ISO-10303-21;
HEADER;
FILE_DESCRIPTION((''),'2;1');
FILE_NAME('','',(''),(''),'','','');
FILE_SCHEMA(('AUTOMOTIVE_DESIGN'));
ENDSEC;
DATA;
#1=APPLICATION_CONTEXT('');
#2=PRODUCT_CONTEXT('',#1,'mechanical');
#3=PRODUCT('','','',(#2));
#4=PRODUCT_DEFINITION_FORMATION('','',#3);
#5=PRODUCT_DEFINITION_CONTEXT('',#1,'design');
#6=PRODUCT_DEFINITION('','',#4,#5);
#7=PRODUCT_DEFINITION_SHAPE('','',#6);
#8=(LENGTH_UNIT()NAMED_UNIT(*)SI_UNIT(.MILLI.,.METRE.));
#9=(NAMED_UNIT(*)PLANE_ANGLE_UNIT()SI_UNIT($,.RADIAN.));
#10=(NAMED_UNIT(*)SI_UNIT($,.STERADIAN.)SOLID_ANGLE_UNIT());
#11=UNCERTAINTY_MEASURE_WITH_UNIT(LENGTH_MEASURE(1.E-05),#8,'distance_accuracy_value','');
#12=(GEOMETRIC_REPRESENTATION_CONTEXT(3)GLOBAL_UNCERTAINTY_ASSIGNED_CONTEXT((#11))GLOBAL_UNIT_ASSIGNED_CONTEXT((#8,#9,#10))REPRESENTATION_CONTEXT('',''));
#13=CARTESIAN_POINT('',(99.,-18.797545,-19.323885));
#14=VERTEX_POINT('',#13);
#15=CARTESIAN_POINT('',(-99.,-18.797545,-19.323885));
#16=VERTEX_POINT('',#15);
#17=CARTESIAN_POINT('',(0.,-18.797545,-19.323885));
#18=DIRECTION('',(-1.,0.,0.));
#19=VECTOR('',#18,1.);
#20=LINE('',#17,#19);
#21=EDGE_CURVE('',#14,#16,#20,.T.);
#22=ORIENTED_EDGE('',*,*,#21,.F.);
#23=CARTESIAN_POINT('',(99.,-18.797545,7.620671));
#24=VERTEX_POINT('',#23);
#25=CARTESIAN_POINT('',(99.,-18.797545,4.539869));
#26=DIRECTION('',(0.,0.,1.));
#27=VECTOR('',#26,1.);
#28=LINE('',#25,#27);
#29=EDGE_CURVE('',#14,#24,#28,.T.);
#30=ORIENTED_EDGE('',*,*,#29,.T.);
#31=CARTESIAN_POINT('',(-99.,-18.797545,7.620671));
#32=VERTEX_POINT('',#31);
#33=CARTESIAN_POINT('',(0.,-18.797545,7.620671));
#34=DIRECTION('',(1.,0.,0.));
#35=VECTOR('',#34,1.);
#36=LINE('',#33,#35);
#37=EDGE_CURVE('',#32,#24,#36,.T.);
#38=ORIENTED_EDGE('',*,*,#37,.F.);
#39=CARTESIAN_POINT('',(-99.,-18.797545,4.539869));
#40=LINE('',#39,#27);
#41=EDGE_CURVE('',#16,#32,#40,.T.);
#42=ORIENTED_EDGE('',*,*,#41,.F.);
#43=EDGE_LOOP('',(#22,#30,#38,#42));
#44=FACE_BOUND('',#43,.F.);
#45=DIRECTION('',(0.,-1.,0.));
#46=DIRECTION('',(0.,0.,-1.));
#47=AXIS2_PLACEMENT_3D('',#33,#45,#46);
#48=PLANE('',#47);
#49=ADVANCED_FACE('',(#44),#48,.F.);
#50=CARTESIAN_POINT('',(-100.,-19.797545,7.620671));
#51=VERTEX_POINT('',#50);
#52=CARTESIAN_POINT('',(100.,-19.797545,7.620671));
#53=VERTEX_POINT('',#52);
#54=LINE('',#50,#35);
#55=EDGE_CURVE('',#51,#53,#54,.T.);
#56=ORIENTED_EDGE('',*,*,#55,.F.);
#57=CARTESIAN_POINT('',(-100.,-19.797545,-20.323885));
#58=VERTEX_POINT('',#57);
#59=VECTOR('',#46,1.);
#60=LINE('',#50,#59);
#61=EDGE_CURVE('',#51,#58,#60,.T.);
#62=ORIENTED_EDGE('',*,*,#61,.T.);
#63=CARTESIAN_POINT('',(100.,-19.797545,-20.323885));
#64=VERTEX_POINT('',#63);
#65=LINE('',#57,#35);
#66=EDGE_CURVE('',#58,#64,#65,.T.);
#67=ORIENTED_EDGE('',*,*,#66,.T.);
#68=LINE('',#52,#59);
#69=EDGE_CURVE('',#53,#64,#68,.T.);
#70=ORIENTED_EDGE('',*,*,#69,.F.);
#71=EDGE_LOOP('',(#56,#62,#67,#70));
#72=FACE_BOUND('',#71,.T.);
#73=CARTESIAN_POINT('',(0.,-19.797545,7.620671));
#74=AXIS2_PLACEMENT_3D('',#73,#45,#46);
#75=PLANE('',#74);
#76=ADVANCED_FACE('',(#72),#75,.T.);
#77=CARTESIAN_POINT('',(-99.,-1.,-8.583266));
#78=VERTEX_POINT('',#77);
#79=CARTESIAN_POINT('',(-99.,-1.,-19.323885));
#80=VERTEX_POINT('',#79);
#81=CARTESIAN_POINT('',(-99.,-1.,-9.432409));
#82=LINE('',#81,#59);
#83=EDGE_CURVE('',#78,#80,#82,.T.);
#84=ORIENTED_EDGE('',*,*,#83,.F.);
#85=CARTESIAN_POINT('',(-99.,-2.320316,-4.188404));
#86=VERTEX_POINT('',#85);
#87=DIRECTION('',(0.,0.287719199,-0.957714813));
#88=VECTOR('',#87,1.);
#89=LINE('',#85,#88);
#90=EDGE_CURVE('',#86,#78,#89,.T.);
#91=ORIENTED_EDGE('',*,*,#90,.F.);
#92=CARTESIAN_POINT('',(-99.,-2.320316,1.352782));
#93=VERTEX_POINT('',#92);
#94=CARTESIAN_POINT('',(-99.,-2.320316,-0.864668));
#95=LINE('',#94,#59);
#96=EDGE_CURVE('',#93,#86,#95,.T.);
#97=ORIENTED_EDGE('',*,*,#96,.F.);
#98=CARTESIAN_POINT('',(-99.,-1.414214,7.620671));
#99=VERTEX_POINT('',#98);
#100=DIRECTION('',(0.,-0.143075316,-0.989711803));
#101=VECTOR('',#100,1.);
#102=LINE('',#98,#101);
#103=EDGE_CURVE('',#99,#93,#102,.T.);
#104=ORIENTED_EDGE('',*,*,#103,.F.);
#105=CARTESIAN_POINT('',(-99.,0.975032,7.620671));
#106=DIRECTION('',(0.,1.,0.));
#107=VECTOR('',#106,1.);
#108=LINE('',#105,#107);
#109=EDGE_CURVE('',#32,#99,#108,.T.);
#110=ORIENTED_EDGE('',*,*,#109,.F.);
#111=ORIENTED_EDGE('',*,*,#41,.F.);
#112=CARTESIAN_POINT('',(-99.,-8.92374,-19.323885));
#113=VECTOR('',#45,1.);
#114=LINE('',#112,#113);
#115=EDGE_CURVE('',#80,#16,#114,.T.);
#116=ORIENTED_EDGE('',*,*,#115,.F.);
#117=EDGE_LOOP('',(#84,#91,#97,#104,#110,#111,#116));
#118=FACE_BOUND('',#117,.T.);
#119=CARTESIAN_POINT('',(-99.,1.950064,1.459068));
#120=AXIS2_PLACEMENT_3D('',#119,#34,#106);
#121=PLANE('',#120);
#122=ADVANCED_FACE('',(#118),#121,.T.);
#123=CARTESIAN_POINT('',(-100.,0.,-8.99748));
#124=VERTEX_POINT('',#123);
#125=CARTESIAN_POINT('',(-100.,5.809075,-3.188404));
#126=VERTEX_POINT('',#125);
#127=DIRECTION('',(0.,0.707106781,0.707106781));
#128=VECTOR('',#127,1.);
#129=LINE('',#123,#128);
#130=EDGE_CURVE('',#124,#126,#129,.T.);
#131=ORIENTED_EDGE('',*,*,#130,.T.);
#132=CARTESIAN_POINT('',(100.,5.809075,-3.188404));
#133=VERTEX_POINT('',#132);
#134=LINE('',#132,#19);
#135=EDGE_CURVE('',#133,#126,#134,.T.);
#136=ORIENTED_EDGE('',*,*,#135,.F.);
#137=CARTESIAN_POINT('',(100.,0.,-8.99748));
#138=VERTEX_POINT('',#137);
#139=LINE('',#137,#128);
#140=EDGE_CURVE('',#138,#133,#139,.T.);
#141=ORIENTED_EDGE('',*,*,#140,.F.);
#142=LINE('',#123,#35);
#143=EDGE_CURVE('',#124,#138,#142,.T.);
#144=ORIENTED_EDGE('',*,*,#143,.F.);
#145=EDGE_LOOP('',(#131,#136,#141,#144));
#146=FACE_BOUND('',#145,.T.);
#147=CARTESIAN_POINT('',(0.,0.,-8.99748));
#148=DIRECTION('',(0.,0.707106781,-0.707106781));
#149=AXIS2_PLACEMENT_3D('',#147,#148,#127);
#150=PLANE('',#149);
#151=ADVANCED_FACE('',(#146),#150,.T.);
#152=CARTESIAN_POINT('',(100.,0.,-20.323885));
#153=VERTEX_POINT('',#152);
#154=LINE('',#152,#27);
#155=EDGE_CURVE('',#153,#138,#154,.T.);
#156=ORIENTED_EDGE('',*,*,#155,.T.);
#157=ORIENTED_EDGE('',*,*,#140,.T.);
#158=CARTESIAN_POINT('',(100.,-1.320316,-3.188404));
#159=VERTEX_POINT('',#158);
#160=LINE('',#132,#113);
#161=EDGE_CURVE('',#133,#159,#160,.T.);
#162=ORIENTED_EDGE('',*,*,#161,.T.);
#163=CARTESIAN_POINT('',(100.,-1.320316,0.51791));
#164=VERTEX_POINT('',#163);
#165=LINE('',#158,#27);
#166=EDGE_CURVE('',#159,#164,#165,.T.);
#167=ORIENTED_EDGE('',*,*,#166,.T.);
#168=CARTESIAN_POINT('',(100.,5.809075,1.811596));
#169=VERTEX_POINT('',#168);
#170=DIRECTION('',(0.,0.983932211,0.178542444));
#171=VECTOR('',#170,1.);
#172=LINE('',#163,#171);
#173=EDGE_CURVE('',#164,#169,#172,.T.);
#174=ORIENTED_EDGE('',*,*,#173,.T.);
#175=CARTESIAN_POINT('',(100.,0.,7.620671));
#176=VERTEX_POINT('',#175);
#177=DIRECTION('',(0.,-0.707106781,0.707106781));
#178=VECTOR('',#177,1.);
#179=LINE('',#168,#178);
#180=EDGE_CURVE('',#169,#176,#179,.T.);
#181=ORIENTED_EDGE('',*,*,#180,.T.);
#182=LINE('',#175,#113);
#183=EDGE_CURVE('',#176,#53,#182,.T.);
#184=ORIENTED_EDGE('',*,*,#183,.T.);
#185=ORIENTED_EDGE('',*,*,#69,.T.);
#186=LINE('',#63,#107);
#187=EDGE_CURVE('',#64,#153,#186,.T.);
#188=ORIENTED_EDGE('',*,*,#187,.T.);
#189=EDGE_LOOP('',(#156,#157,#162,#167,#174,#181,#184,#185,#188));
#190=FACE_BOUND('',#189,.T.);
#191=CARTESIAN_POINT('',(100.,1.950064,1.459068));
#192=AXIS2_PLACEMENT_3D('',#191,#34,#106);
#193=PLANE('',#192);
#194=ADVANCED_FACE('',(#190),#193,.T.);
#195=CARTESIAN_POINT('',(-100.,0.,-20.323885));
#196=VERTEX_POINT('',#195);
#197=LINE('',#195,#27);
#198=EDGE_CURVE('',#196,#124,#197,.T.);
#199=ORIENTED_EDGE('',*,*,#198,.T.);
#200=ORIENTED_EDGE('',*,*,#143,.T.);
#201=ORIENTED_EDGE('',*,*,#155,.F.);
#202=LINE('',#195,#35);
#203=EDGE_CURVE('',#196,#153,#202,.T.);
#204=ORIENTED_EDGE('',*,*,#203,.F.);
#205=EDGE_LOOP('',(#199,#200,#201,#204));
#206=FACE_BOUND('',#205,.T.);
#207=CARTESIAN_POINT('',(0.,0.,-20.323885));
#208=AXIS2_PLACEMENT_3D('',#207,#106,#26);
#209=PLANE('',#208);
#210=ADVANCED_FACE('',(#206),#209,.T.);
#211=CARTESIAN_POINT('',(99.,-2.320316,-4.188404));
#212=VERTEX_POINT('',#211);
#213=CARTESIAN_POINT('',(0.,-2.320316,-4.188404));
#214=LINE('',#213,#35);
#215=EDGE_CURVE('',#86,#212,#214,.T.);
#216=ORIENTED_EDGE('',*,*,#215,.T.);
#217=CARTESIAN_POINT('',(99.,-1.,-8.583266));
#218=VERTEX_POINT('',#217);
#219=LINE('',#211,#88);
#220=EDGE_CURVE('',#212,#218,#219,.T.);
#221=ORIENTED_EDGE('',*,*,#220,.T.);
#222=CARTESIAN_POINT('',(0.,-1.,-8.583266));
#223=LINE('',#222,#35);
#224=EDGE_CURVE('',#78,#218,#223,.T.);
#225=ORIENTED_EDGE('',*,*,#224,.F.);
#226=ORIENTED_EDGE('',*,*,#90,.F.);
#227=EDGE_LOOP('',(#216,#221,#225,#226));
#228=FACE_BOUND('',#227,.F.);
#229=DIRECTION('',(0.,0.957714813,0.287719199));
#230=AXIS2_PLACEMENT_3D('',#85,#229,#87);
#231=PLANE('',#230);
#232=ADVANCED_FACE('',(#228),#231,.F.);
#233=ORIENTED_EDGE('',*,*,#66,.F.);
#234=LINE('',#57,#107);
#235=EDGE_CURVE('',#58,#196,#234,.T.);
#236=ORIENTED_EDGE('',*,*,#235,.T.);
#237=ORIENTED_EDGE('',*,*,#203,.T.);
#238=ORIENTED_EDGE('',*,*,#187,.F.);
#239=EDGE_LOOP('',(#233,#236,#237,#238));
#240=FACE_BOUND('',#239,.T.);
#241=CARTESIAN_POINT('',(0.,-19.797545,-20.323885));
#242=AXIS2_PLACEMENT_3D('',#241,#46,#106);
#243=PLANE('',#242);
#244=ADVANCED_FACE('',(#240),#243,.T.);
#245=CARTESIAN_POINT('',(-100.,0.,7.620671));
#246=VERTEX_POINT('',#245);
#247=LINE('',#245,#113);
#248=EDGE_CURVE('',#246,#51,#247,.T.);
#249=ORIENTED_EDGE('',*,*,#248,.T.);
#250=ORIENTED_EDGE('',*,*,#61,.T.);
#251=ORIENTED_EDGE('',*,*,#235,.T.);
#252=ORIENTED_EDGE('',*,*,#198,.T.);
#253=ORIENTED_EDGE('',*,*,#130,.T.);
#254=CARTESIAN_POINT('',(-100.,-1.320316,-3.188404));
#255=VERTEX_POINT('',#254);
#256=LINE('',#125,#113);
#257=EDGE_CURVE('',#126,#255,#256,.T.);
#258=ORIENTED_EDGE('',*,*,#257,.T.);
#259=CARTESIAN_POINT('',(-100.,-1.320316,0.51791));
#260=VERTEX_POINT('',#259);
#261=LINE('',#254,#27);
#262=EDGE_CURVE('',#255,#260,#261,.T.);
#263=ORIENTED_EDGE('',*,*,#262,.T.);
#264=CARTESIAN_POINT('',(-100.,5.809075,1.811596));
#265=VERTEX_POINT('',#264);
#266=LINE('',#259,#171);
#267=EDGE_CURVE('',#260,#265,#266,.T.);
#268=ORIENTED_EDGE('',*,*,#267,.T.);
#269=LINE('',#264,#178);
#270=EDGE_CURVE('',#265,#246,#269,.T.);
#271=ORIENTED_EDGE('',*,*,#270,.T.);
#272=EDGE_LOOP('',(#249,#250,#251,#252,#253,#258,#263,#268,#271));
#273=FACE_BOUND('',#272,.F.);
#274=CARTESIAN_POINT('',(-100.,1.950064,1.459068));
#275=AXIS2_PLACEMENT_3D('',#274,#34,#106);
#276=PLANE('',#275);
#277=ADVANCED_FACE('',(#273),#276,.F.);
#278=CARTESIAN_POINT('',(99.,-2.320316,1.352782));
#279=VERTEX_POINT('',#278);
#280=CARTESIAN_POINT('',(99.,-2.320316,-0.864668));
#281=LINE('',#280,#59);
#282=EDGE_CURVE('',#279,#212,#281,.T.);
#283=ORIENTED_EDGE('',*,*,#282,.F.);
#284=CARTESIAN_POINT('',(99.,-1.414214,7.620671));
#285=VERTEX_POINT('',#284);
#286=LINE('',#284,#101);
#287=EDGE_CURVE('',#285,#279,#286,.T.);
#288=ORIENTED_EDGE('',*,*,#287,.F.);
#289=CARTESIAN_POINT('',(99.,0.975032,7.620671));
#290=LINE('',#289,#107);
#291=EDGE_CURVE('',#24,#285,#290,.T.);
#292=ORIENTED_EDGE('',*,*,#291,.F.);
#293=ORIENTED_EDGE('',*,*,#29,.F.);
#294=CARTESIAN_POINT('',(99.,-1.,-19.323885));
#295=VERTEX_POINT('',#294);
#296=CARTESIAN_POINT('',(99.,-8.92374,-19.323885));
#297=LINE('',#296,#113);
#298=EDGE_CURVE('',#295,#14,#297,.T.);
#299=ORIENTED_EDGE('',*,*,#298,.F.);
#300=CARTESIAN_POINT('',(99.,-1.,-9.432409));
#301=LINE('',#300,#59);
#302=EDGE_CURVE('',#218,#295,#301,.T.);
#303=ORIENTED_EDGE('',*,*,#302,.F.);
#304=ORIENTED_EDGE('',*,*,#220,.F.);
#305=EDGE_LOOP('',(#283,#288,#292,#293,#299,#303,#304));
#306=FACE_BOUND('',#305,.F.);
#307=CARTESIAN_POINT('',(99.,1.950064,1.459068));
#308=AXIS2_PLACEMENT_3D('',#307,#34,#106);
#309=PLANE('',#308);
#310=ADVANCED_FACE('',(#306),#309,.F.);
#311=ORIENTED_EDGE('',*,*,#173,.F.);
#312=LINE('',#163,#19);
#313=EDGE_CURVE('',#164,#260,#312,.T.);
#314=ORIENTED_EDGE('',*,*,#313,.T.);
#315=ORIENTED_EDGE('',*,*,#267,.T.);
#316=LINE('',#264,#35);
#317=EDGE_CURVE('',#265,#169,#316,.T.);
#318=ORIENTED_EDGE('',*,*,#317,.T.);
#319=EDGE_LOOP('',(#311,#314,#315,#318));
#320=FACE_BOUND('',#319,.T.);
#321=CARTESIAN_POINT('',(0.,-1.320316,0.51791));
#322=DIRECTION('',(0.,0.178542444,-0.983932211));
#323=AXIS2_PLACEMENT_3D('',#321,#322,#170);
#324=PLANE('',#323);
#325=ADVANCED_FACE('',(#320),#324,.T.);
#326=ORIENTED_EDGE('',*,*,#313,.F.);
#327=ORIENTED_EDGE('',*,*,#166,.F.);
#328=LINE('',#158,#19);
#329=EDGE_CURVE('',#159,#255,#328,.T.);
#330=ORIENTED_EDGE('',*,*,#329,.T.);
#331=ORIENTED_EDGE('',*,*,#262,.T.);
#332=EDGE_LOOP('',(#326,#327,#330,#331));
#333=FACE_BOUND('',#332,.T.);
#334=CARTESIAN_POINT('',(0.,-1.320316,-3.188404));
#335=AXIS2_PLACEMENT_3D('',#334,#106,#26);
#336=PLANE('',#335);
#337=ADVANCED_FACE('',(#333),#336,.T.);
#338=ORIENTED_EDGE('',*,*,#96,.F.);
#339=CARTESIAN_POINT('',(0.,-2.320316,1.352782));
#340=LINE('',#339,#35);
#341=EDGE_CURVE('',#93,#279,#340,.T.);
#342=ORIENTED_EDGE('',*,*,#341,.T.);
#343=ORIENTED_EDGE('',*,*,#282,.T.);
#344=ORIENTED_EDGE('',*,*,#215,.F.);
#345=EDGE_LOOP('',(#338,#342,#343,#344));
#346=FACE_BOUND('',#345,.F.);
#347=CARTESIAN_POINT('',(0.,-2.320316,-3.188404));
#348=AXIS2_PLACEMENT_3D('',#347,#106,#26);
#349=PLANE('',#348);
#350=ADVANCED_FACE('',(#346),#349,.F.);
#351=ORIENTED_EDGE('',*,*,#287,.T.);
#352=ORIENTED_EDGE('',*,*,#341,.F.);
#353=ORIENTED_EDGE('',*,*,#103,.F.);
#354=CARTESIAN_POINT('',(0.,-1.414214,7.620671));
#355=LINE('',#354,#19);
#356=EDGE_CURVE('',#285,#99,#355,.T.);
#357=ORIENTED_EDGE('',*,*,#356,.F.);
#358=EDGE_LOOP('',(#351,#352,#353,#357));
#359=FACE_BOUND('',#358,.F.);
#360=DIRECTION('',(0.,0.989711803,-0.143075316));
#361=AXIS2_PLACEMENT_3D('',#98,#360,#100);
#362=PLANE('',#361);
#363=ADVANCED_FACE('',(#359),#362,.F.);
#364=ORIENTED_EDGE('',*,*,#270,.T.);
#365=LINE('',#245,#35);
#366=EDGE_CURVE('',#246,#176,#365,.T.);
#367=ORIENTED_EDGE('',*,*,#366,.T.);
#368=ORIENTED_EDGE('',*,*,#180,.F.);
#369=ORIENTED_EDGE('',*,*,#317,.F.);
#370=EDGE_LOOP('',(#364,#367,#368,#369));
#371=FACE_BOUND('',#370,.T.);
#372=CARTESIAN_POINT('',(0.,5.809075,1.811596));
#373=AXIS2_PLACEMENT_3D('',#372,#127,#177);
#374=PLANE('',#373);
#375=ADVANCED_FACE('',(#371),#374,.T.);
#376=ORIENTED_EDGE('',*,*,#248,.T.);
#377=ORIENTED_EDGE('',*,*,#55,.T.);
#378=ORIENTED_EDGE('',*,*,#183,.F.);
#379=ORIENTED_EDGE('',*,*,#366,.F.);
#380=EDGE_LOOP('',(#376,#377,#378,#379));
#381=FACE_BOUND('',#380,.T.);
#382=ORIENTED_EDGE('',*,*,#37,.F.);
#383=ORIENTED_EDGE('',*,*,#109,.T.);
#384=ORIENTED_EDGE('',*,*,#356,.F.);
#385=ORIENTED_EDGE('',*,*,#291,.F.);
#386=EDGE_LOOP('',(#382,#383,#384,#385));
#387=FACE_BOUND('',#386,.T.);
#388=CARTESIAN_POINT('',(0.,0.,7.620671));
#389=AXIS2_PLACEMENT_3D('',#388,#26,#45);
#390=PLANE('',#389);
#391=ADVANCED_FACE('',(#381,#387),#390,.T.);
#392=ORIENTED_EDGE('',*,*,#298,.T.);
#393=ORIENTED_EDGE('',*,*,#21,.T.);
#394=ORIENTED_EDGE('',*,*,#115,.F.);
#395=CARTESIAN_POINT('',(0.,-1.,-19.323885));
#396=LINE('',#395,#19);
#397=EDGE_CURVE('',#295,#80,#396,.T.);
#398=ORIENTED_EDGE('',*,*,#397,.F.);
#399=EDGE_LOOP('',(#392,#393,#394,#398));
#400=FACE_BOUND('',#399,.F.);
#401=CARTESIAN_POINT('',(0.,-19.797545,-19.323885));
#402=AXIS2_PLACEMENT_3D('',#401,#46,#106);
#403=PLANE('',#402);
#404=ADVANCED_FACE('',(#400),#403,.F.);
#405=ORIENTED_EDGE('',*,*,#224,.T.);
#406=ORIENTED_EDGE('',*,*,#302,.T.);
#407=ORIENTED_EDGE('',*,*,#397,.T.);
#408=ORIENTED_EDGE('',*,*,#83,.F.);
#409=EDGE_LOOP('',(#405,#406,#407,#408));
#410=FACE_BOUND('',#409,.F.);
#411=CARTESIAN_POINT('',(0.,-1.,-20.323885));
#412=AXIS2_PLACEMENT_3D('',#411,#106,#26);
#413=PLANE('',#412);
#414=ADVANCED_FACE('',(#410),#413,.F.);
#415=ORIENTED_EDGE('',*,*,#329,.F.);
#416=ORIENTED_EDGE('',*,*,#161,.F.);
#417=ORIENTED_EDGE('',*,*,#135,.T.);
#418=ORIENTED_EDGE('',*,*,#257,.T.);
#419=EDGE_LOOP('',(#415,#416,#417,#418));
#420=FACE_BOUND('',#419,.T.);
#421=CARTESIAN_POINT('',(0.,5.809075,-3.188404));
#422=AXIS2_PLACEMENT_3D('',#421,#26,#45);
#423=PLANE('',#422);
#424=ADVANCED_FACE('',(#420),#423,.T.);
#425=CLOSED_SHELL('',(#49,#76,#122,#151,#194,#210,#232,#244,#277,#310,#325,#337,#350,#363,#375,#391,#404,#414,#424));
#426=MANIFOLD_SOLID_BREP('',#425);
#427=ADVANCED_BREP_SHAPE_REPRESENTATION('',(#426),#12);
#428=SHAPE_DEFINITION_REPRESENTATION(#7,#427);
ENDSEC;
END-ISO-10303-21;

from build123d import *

# Parameters (mm, degrees)
F1_DEPTH = 100
F2_T     = -1
F4_DEPTH = 198


with BuildPart() as f1:
    # F0 (on Right) → F1 (new body, symmetric)
    with BuildSketch(Plane.YZ):
        Polygon((5.8090751991, 1.8115955126), (0, 1.8115955126), (-1.3203158755, 1.8115955126), (-1.3203158755, 0.5179099389), align=None)
        Polygon((-1.3203158755, 1.8115955126), (0, 1.8115955126), (5.8090751991, 1.8115955126), (0, 7.6206707116), (-19.7975447644, 7.6206707116), (-19.7975447644, -20.3238854808), (0, -20.3238854808), (0, -8.9974796865), (0, -3.1884044874), (-1.3203158755, -3.1884044874), (-1.3203158755, 0.5179099389), align=None)
        Polygon((5.8090751991, -3.1884044874), (0, -3.1884044874), (0, -8.9974796865), align=None)
    extrude(amount=F1_DEPTH, both=True)

    # F2
    f2_openings = [f1.faces().sort_by_distance(p)[0] for p in [
        (0, -9.898772, 7.620671),
    ]]
    offset(amount=F2_T, openings=f2_openings, kind=Kind.INTERSECTION)

    # F3 (on face) → F4 (join, through all)
    with BuildSketch(Plane.YZ.offset(-99)):
        Polygon((-1.4142135624, 7.6206707116), (-2.3203158755, 1.3527820438), (3.7518344093, 2.4546227399), align=None)
        Polygon((3.3948616367, -4.1884044874), (-2.3203158755, -4.1884044874), (-1, -8.5832661241), align=None)
    extrude(amount=F4_DEPTH)


solid = f1.part
